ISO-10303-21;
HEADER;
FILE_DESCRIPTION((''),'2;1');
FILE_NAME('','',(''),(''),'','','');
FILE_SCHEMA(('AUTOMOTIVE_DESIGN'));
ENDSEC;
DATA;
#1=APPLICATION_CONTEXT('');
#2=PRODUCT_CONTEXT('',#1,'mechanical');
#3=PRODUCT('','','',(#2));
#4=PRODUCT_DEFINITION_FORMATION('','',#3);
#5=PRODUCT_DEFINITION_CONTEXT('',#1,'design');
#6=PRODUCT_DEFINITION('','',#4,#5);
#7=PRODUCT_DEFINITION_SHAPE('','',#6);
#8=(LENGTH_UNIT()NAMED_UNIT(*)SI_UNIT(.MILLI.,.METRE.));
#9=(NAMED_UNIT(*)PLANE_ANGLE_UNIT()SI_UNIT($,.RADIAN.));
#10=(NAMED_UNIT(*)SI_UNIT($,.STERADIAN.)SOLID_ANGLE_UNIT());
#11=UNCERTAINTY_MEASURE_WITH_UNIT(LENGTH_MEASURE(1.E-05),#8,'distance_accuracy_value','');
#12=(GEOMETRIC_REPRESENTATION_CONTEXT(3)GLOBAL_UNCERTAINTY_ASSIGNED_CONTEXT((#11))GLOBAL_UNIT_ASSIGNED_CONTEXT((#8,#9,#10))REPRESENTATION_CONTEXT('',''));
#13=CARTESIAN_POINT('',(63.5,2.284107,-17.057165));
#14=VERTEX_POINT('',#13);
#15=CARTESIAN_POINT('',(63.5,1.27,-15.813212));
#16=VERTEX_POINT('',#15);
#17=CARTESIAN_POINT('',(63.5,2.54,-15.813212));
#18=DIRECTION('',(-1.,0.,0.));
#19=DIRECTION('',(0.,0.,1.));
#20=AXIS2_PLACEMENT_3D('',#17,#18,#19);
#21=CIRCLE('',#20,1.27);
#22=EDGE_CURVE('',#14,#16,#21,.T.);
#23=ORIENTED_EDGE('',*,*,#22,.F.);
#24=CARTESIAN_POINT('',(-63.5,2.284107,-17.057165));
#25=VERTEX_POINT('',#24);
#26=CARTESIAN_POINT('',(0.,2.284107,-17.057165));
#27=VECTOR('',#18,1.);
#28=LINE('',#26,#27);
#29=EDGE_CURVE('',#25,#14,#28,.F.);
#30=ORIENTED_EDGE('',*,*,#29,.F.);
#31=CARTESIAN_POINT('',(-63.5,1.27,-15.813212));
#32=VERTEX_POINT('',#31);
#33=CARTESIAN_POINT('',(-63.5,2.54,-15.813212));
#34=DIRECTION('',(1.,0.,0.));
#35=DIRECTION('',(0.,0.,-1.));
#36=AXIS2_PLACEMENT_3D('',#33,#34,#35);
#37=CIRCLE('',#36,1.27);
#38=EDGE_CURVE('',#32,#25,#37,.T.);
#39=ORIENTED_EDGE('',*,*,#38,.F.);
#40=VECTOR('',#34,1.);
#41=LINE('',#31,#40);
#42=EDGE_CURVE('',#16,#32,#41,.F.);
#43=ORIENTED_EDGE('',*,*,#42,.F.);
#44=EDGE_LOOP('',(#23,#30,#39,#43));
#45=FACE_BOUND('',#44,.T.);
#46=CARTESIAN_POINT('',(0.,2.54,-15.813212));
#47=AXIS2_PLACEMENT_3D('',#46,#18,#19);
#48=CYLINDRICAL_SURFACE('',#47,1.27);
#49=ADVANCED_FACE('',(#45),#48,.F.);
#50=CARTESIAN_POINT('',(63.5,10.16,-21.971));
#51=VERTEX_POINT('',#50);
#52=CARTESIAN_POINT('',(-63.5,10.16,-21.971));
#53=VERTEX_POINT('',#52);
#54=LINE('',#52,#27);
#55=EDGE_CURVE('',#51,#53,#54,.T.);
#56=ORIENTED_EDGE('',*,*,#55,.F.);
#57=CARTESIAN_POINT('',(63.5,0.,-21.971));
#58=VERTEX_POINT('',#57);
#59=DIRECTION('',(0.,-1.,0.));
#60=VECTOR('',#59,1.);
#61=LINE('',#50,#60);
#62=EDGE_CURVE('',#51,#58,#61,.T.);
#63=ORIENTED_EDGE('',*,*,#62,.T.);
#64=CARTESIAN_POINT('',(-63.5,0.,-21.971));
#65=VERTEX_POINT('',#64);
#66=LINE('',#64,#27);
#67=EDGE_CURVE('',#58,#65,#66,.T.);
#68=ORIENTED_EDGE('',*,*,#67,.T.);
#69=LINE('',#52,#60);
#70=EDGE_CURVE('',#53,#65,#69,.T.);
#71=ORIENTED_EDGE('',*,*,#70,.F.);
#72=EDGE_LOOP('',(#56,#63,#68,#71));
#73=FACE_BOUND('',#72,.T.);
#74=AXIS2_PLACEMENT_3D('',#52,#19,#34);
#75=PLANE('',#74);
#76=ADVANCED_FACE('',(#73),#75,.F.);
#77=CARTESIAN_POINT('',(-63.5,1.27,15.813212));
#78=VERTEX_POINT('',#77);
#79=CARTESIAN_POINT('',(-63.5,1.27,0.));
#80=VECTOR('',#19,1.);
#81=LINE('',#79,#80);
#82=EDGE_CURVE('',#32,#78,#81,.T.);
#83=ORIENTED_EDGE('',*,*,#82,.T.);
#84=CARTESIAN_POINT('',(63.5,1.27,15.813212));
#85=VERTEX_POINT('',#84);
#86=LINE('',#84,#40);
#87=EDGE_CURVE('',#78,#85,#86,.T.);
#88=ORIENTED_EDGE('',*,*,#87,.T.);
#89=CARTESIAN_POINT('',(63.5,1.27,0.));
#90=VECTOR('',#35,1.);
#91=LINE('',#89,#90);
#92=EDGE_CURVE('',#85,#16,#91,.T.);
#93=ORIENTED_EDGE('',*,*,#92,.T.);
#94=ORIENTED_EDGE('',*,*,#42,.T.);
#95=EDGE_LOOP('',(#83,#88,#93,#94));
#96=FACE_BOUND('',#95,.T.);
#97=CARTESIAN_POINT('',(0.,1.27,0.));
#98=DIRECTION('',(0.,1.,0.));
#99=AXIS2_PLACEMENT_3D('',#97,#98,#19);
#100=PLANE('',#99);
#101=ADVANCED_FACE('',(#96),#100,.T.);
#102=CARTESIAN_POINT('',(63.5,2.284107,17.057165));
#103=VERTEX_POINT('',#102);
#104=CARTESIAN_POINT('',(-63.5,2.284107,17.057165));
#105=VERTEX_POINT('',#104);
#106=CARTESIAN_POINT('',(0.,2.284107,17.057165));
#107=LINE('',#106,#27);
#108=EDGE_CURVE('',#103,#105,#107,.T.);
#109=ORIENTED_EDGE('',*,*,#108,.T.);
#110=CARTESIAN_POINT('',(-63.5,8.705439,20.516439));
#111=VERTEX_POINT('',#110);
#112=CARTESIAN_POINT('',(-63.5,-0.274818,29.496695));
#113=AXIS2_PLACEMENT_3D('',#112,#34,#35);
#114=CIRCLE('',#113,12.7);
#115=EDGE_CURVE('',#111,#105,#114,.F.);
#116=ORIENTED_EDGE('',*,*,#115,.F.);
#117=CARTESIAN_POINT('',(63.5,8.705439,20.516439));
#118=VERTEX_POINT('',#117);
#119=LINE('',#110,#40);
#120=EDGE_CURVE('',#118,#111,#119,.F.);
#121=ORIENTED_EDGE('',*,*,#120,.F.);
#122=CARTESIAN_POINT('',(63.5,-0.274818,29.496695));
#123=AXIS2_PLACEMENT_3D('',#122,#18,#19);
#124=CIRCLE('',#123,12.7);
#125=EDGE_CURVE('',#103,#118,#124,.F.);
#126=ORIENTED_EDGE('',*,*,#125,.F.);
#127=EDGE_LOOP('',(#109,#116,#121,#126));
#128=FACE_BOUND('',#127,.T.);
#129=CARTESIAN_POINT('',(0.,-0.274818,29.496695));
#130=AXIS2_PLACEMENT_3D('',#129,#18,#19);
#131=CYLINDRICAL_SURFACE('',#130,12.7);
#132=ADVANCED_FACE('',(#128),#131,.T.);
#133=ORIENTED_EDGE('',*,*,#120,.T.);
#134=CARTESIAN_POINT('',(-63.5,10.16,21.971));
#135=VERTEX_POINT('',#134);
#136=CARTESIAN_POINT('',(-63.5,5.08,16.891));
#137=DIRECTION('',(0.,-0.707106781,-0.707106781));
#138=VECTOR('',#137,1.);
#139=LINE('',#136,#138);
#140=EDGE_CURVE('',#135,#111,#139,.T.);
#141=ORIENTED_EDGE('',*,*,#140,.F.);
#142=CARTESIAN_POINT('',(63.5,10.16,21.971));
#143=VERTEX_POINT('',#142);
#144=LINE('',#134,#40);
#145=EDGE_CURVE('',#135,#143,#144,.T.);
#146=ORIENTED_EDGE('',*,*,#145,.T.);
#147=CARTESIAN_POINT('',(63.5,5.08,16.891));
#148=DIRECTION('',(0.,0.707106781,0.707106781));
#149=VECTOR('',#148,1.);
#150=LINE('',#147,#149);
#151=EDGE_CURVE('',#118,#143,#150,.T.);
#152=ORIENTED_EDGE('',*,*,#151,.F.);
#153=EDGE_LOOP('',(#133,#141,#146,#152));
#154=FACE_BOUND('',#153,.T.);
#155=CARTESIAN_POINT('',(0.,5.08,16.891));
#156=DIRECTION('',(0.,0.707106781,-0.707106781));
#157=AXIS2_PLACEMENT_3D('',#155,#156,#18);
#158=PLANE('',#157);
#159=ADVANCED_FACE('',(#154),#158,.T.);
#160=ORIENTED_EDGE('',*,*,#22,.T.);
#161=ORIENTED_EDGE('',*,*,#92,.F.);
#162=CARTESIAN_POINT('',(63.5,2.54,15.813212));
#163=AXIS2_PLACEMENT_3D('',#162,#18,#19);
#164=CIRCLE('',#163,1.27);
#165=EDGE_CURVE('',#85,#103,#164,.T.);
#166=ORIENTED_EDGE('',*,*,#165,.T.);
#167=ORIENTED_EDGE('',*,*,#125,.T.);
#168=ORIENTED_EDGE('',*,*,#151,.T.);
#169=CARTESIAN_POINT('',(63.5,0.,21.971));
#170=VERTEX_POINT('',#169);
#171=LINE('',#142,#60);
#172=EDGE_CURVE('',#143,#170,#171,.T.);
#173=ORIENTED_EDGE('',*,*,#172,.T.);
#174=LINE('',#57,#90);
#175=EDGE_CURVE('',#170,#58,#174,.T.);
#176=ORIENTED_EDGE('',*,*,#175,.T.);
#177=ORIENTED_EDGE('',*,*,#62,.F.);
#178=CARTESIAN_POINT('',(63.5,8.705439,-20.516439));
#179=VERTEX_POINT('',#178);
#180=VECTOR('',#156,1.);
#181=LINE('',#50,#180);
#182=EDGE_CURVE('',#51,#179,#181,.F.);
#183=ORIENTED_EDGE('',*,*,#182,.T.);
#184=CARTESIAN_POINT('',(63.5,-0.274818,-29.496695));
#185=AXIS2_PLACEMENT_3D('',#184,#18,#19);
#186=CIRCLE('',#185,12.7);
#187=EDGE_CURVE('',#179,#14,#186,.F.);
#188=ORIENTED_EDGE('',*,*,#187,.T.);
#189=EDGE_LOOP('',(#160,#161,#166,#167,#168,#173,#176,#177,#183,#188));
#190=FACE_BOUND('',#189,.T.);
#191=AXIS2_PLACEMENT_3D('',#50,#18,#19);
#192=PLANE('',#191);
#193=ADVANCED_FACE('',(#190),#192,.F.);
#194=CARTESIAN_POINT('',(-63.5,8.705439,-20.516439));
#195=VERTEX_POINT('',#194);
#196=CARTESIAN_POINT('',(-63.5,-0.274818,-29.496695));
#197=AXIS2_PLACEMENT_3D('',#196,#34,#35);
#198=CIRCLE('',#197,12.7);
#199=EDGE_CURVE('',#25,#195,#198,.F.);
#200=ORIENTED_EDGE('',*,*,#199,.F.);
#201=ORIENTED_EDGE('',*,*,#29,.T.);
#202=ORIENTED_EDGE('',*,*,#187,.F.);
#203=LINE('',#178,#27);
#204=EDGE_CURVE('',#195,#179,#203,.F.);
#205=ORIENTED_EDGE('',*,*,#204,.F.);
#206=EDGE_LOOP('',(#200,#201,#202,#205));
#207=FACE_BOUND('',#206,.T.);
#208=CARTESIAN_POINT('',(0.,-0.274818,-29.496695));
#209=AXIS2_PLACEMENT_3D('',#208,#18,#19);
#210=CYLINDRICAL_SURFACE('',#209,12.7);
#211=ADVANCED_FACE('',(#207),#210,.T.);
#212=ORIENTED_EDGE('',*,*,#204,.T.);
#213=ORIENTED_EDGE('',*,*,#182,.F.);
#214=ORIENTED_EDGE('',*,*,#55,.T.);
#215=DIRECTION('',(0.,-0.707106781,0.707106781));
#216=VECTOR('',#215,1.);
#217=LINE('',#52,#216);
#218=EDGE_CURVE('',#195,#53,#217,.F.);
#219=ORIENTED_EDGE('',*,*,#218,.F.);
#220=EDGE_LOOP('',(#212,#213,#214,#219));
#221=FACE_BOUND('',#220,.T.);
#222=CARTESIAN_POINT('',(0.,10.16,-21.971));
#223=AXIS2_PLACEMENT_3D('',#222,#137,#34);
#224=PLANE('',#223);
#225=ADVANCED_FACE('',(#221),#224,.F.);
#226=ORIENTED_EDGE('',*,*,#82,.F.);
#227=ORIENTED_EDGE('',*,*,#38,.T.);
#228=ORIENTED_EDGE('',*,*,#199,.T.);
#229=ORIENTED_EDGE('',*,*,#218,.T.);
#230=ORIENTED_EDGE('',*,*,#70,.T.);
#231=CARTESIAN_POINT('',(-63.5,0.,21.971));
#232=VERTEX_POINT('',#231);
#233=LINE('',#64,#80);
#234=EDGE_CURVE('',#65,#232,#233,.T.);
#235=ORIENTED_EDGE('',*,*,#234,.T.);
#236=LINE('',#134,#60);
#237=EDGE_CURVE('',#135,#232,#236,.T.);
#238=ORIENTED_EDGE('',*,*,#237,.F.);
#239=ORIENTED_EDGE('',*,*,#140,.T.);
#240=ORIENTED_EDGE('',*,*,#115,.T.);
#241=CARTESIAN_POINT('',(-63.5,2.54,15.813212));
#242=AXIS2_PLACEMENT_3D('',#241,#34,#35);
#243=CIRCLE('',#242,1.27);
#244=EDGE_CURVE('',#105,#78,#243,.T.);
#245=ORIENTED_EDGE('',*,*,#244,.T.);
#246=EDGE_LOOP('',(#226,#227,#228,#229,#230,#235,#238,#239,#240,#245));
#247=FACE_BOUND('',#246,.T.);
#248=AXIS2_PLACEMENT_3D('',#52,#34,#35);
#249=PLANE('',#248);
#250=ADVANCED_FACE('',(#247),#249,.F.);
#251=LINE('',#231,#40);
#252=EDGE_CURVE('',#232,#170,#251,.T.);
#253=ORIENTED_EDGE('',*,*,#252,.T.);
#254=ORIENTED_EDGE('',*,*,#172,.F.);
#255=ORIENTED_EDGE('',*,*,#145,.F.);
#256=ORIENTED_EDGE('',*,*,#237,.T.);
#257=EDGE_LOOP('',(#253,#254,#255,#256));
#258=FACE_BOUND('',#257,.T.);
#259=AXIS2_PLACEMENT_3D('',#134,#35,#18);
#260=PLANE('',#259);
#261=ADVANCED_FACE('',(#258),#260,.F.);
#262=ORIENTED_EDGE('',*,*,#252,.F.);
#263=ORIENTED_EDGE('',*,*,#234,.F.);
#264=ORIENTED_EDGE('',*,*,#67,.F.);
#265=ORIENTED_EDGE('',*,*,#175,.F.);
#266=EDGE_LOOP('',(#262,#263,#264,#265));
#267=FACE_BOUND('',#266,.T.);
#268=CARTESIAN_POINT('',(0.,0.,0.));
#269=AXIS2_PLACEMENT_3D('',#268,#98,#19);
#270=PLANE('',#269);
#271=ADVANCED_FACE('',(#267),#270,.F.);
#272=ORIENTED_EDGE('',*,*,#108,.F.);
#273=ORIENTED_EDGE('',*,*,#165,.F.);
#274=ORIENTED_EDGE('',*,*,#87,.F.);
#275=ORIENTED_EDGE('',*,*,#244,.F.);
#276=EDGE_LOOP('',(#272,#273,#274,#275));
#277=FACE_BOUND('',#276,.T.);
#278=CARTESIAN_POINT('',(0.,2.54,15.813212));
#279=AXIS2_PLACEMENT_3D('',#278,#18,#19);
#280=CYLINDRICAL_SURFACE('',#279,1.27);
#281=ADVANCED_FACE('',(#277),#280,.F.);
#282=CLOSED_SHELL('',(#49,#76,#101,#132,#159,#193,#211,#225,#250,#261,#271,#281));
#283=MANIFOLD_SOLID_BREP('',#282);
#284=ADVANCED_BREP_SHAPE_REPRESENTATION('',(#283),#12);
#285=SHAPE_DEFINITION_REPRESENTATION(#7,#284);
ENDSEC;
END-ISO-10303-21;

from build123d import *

# Parameters (mm, degrees)
SKETCH1_W           = 127
SKETCH1_H           = 43.942
BOSS_EXTRUDE1_DEPTH = 10.16
SKETCH2_W           = 114.3
SKETCH2_H           = 33.782
SKETCH2_W_2         = 6.35
CUT_EXTRUDE1_DEPTH  = 8.89
CHAMFER1_SIZE       = 5.08
FILLET1_R           = 12.7
FILLET2_R           = 1.27


# Some blends are built 0.0001 mm under size
with BuildPart() as part:
    # Sketch1 → Boss-Extrude1 (new body)
    with BuildSketch(Plane(origin=(0, 0, 0), x_dir=(1, 0, 0), z_dir=(0, 1, 0))):
        Rectangle(SKETCH1_W, SKETCH1_H)
    extrude(amount=BOSS_EXTRUDE1_DEPTH)

    # Sketch2 → Cut-Extrude1 (cut)
    with BuildSketch(Plane(origin=(0, 10.16, 0), x_dir=(1, 0, 0), z_dir=(0, 1, 0))):
        Rectangle(SKETCH2_W, SKETCH2_H)
        with Locations((60.325, 0)):
            Rectangle(SKETCH2_W_2, SKETCH2_H)
        with Locations((-60.325, 0)):
            Rectangle(SKETCH2_W_2, SKETCH2_H)
    extrude(amount=-CUT_EXTRUDE1_DEPTH, mode=Mode.SUBTRACT)

    # Chamfer1
    chamfer1_edges = [part.edges().sort_by_distance(p)[0] for p in [
        (0, 10.16, 16.891),
        (0, 10.16, -16.891),
    ]]
    chamfer(chamfer1_edges, length=CHAMFER1_SIZE - 0.0001)  # a hair under: the kernel refuses the full size

    # Fillet1
    # the kernel refuses this fillet: 12.7 mm, written as the material it takes off along each edge
    with BuildSketch(Plane(origin=(76.317910379, 5.0801, 16.891), x_dir=(0, -1, 0), z_dir=(-1, 0, 0))) as fillet1_piece_1:
        with BuildLine():
            CenterArc((5.354803581, 12.605708661), FILLET1_R, 225, 38.013804416)
            Line((-3.62545254, 3.62545254), (-3.805057662, 3.445847418))
            Line((-3.805057662, 3.445847418), (-0.179605122, -0.179605122))
            Line((-0.179605122, -0.179605122), (0, -0.254))
            ThreePointArc((0, -0.254), (1.90505, -0.254), (3.779205928, -0.252114173))
            Line((3.779205928, -0.252114173), (3.8101, 0))
        make_face()
    extrude(amount=152.635820759, mode=Mode.SUBTRACT)
    with BuildSketch(Plane(origin=(76.317910379, 5.0801, -16.891), x_dir=(0, 0.7071067811865474, -0.7071067811865477), z_dir=(-1, 0, 0))) as fillet1_piece_2:
        with BuildLine():
            CenterArc((5.127164152, 12.7), FILLET1_R, 231.986195584, 38.013804416)
            Line((-2.694147547, 2.694147547), (-2.850573781, 2.494030498))
            ThreePointArc((-2.850573781, 2.494030498), (-1.526678896, 1.167468651), (-0.179605122, -0.179605122))
            Line((-0.179605122, -0.179605122), (0, -0.254))
            Line((0, -0.254), (5.127164152, -0.254))
            Line((5.127164152, -0.254), (5.127164152, 0))
        make_face()
    extrude(amount=152.635820759, mode=Mode.SUBTRACT)

    # Fillet2
    fillet2_edges = [part.edges().sort_by_distance(p)[0] for p in [
        (0, 1.27, 16.891),
        (0, 1.27, -16.891),
    ]]
    fillet(fillet2_edges, radius=FILLET2_R)


solid = part.part
